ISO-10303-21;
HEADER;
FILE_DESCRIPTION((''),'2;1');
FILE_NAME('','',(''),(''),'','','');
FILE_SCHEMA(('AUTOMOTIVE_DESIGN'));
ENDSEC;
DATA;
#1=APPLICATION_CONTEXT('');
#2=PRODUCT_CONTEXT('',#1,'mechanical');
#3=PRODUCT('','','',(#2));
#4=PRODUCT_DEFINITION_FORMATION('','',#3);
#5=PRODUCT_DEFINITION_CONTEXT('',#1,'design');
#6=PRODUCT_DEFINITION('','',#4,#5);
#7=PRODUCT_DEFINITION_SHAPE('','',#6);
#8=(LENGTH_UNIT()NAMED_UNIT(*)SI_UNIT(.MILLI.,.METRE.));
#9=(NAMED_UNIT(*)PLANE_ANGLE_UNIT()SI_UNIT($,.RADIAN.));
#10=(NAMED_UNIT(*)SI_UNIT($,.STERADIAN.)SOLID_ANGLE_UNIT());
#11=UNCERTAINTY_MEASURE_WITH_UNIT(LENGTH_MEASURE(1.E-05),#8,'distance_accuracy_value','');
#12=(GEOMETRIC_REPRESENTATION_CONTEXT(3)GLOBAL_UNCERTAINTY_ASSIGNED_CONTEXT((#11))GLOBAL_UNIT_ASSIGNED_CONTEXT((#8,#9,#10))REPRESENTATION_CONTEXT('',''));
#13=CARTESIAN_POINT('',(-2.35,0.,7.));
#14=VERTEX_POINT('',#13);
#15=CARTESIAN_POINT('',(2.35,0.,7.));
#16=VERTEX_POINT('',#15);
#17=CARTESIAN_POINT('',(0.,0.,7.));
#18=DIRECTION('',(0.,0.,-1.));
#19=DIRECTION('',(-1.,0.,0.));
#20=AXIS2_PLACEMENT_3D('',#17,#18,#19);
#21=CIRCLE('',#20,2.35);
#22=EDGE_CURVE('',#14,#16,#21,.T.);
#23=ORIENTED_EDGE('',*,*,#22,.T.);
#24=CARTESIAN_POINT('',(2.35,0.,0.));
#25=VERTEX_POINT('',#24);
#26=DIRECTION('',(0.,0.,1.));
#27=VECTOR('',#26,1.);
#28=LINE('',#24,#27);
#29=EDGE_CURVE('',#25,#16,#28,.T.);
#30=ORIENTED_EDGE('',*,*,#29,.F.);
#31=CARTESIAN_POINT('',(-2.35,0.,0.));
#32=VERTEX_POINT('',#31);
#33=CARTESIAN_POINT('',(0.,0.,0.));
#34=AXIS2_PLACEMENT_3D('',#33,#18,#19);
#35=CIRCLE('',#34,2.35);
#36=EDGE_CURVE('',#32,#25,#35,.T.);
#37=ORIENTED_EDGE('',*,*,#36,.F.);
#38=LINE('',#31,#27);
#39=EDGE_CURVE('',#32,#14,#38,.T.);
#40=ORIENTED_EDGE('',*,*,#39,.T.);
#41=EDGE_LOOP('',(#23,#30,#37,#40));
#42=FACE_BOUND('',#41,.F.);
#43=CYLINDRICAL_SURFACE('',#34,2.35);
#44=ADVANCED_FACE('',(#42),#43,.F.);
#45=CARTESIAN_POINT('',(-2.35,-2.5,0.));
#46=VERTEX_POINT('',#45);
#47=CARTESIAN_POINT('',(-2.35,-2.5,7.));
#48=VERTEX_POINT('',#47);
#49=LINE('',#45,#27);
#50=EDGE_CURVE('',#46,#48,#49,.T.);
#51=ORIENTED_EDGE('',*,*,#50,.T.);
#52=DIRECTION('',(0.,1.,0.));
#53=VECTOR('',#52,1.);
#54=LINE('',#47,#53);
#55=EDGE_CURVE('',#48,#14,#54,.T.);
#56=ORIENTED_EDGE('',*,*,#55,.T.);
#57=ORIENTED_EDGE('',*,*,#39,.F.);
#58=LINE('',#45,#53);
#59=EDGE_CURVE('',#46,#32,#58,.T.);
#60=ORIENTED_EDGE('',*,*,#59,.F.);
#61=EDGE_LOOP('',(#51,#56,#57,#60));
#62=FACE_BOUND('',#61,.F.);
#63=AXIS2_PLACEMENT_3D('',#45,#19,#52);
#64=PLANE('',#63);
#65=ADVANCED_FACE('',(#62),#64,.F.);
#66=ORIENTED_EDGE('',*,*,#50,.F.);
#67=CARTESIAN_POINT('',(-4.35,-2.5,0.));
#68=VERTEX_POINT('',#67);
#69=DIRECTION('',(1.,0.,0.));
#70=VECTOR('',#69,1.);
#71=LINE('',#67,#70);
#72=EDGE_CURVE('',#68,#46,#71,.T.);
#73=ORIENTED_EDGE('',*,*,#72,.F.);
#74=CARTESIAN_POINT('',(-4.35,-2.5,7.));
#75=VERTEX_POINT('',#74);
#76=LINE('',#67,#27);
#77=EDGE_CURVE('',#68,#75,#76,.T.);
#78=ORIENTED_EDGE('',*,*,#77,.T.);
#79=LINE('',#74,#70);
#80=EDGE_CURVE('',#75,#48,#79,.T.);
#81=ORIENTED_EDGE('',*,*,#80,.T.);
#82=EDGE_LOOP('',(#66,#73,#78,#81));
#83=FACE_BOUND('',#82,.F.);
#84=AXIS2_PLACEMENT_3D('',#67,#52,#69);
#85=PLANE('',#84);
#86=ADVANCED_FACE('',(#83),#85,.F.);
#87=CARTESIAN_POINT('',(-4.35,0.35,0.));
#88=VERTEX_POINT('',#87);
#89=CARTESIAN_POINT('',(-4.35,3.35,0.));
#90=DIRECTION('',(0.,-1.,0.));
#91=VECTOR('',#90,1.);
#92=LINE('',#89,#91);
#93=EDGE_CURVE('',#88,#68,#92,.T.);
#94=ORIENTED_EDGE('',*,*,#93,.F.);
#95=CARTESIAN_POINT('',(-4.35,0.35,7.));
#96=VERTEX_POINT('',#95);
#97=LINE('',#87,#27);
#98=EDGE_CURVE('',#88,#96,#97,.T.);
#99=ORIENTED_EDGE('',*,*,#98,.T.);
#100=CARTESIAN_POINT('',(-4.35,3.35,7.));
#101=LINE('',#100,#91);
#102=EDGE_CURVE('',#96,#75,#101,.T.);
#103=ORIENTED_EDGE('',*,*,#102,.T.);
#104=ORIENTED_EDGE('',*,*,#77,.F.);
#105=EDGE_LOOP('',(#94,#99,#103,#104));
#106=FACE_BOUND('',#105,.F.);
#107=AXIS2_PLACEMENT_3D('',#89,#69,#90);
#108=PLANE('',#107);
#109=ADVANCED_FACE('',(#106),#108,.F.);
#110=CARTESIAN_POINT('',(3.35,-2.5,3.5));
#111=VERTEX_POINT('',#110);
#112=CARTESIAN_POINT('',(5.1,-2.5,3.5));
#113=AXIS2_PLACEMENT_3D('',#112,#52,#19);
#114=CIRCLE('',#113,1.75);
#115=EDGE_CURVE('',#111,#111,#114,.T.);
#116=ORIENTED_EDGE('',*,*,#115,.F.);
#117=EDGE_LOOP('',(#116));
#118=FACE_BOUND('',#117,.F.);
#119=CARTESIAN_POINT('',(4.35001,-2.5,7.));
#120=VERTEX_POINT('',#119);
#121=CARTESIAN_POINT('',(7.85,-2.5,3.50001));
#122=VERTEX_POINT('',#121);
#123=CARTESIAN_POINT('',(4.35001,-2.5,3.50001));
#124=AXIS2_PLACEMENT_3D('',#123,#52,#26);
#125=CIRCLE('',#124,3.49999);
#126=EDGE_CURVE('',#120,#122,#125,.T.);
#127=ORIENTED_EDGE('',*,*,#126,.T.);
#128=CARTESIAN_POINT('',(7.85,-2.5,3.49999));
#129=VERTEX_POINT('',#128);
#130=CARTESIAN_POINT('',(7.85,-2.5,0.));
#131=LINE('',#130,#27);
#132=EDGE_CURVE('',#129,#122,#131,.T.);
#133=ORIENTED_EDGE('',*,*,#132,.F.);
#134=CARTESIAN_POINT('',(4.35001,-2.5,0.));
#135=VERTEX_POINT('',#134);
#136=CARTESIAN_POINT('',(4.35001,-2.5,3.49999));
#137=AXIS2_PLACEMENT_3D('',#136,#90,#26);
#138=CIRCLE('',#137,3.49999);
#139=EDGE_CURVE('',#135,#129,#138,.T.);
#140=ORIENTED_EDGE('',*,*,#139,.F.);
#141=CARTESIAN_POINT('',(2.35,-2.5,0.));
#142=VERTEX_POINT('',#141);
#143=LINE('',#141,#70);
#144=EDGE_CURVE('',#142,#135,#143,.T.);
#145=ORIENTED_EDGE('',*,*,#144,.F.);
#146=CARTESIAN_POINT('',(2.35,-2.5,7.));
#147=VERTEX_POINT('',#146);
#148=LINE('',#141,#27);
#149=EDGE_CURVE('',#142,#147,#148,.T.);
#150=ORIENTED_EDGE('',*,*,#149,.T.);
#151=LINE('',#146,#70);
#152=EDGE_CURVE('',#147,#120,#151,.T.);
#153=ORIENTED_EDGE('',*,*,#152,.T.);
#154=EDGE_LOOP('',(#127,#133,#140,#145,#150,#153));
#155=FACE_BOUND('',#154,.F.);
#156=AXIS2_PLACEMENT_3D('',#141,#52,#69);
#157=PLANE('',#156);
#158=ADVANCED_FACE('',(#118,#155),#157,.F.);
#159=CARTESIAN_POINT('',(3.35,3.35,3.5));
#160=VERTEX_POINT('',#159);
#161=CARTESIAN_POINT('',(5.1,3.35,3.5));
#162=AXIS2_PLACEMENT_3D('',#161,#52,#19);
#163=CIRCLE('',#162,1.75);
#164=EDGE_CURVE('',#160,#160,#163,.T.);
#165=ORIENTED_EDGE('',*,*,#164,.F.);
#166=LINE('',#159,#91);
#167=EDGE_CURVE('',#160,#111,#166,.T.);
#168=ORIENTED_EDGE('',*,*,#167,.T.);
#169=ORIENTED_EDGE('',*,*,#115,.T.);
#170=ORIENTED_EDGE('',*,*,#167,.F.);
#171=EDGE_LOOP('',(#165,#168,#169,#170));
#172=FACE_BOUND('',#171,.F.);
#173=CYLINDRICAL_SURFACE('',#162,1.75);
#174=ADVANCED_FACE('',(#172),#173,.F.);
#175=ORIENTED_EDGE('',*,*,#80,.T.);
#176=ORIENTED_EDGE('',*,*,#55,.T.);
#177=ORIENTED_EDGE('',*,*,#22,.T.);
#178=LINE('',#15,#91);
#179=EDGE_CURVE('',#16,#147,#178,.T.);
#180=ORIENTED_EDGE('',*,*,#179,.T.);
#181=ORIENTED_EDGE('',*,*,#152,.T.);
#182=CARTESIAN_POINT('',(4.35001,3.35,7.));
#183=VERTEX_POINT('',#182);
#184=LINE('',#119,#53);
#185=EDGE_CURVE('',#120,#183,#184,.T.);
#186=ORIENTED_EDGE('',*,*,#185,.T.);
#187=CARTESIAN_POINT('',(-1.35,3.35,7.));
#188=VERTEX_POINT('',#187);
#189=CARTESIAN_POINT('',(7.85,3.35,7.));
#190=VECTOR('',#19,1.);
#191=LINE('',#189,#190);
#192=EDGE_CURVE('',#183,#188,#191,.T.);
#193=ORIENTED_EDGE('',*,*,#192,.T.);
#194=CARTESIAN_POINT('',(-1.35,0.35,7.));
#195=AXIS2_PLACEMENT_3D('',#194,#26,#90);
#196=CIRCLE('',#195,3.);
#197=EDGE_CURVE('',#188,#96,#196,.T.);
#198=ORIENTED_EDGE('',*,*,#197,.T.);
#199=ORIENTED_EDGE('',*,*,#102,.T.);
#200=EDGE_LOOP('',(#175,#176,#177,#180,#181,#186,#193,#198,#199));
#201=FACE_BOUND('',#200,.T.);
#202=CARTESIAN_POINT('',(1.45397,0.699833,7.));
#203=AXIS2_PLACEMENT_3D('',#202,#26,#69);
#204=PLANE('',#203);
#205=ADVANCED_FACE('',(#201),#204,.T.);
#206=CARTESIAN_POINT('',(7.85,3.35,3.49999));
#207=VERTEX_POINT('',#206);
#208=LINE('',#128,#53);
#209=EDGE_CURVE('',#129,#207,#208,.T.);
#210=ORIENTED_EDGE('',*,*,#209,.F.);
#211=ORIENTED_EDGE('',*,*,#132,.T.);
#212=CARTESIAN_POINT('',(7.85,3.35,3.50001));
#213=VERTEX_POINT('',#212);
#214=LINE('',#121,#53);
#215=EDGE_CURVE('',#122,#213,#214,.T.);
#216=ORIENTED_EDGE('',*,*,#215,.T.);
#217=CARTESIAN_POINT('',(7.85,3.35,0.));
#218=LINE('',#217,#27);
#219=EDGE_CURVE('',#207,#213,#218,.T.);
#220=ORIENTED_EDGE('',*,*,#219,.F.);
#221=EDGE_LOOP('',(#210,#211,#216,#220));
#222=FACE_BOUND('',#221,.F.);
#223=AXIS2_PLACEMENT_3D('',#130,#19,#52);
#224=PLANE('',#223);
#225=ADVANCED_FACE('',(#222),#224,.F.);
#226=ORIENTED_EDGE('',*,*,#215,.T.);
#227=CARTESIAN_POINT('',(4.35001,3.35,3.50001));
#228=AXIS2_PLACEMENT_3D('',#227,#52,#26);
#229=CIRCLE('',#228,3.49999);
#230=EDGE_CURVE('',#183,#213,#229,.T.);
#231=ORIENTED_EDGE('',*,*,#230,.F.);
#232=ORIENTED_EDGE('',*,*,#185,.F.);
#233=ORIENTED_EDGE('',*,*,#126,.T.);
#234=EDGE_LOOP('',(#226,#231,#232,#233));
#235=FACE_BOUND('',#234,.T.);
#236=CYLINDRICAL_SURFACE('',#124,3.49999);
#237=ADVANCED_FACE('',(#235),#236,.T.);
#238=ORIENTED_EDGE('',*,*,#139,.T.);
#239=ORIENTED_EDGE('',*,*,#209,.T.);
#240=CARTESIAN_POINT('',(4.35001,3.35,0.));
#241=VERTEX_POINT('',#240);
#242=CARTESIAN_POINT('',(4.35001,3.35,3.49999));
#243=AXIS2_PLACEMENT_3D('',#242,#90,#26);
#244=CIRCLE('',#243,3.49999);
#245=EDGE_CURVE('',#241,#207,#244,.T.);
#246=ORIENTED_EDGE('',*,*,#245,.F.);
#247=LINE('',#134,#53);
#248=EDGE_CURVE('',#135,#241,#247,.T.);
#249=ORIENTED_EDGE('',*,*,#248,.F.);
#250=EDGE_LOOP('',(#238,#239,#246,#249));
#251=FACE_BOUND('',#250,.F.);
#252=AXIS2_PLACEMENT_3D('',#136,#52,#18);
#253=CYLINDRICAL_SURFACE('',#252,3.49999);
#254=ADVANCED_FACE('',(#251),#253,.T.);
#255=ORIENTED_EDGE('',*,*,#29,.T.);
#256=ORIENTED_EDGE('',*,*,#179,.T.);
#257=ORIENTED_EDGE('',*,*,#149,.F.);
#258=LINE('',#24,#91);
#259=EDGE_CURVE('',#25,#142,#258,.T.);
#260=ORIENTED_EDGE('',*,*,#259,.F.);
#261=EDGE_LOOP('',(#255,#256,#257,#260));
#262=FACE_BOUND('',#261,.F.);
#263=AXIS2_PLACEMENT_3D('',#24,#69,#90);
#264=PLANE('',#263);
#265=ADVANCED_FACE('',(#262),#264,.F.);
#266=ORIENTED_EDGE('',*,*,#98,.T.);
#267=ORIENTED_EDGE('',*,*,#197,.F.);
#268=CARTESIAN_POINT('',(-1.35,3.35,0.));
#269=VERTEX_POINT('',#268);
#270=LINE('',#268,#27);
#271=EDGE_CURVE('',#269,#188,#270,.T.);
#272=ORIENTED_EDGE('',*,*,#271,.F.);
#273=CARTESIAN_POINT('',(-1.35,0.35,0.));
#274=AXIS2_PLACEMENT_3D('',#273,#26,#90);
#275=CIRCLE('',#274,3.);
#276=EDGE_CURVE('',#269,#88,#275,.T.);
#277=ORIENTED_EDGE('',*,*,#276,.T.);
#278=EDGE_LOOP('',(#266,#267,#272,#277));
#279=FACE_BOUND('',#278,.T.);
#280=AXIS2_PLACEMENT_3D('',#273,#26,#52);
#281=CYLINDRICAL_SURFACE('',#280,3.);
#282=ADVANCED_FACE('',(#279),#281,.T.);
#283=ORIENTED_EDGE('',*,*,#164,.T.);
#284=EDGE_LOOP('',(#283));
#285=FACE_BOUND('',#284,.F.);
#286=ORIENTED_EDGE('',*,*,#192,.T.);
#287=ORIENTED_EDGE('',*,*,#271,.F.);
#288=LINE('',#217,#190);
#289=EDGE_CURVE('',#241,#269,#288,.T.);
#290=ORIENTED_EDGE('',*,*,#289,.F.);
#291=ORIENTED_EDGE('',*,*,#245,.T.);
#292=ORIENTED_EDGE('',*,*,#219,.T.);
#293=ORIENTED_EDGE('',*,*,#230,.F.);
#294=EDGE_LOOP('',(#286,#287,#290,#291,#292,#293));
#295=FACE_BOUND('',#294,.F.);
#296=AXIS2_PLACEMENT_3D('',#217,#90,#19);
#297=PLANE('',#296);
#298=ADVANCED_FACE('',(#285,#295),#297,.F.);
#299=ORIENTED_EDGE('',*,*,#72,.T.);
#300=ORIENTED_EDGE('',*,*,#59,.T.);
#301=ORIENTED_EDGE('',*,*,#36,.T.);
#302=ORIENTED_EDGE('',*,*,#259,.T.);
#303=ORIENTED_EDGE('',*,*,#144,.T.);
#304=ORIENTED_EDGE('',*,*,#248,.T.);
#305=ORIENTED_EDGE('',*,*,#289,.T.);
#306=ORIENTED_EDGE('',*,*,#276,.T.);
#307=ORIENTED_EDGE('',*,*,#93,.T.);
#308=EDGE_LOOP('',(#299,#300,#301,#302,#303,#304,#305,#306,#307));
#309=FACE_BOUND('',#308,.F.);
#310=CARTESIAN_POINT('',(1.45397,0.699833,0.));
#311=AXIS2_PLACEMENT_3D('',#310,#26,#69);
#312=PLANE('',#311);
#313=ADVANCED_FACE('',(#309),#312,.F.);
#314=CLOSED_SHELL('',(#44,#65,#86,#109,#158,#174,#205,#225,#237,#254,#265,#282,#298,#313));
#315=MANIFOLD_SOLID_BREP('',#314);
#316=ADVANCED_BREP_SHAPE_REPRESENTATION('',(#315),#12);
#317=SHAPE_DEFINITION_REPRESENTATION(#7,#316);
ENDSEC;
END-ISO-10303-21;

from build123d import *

# Parameters (mm, degrees)
F1_DEPTH = 7
F2_R     = 1.75
F3_DEPTH = 5.85
F4_R     = 3.49999
F5_R     = 3


# Not quite as in the source:
# - a fillet or chamfer is up to 0.001 mm smaller than in the source, because OpenCascade refuses the exact size


with BuildPart() as f1:
    # F0 (on Top) → F1 (new body)
    with BuildSketch(Plane.XY):
        with BuildLine():
            ThreePointArc((-2.35, 0), (0, 2.35), (2.35, 0))
            Line((2.35, 0), (2.35, -2.5))
            Line((2.35, -2.5), (7.85, -2.5))
            Line((7.85, -2.5), (7.85, 3.35))
            Line((7.85, 3.35), (-4.35, 3.35))
            Line((-4.35, 3.35), (-4.35, -2.5))
            Line((-4.35, -2.5), (-2.35, -2.5))
            Line((-2.35, -2.5), (-2.35, 0))
        make_face()
    extrude(amount=F1_DEPTH)

    # F2 (on face) → F3 (cut, through all)
    with BuildSketch(Plane(origin=(0, 3.35, 0), x_dir=(-1, 0, 0), z_dir=(0, 1, 0))):
        with Locations((-5.1, 3.5)):
            Circle(F2_R)
    extrude(amount=-F3_DEPTH, mode=Mode.SUBTRACT)

    # F4 (radius 3.5 in the source; OpenCascade refuses exactly that, so slightly less here)
    f4_edges = [f1.edges().sort_by_distance(p)[0] for p in [
        (7.85, 0.425, 7),
        (7.85, 0.425, 0),
    ]]
    fillet(f4_edges, radius=F4_R)

    # F5
    f5_edges = [f1.edges().sort_by_distance(p)[0] for p in [
        (-4.35, 3.35, 3.5),
    ]]
    fillet(f5_edges, radius=F5_R)


solid = f1.part
